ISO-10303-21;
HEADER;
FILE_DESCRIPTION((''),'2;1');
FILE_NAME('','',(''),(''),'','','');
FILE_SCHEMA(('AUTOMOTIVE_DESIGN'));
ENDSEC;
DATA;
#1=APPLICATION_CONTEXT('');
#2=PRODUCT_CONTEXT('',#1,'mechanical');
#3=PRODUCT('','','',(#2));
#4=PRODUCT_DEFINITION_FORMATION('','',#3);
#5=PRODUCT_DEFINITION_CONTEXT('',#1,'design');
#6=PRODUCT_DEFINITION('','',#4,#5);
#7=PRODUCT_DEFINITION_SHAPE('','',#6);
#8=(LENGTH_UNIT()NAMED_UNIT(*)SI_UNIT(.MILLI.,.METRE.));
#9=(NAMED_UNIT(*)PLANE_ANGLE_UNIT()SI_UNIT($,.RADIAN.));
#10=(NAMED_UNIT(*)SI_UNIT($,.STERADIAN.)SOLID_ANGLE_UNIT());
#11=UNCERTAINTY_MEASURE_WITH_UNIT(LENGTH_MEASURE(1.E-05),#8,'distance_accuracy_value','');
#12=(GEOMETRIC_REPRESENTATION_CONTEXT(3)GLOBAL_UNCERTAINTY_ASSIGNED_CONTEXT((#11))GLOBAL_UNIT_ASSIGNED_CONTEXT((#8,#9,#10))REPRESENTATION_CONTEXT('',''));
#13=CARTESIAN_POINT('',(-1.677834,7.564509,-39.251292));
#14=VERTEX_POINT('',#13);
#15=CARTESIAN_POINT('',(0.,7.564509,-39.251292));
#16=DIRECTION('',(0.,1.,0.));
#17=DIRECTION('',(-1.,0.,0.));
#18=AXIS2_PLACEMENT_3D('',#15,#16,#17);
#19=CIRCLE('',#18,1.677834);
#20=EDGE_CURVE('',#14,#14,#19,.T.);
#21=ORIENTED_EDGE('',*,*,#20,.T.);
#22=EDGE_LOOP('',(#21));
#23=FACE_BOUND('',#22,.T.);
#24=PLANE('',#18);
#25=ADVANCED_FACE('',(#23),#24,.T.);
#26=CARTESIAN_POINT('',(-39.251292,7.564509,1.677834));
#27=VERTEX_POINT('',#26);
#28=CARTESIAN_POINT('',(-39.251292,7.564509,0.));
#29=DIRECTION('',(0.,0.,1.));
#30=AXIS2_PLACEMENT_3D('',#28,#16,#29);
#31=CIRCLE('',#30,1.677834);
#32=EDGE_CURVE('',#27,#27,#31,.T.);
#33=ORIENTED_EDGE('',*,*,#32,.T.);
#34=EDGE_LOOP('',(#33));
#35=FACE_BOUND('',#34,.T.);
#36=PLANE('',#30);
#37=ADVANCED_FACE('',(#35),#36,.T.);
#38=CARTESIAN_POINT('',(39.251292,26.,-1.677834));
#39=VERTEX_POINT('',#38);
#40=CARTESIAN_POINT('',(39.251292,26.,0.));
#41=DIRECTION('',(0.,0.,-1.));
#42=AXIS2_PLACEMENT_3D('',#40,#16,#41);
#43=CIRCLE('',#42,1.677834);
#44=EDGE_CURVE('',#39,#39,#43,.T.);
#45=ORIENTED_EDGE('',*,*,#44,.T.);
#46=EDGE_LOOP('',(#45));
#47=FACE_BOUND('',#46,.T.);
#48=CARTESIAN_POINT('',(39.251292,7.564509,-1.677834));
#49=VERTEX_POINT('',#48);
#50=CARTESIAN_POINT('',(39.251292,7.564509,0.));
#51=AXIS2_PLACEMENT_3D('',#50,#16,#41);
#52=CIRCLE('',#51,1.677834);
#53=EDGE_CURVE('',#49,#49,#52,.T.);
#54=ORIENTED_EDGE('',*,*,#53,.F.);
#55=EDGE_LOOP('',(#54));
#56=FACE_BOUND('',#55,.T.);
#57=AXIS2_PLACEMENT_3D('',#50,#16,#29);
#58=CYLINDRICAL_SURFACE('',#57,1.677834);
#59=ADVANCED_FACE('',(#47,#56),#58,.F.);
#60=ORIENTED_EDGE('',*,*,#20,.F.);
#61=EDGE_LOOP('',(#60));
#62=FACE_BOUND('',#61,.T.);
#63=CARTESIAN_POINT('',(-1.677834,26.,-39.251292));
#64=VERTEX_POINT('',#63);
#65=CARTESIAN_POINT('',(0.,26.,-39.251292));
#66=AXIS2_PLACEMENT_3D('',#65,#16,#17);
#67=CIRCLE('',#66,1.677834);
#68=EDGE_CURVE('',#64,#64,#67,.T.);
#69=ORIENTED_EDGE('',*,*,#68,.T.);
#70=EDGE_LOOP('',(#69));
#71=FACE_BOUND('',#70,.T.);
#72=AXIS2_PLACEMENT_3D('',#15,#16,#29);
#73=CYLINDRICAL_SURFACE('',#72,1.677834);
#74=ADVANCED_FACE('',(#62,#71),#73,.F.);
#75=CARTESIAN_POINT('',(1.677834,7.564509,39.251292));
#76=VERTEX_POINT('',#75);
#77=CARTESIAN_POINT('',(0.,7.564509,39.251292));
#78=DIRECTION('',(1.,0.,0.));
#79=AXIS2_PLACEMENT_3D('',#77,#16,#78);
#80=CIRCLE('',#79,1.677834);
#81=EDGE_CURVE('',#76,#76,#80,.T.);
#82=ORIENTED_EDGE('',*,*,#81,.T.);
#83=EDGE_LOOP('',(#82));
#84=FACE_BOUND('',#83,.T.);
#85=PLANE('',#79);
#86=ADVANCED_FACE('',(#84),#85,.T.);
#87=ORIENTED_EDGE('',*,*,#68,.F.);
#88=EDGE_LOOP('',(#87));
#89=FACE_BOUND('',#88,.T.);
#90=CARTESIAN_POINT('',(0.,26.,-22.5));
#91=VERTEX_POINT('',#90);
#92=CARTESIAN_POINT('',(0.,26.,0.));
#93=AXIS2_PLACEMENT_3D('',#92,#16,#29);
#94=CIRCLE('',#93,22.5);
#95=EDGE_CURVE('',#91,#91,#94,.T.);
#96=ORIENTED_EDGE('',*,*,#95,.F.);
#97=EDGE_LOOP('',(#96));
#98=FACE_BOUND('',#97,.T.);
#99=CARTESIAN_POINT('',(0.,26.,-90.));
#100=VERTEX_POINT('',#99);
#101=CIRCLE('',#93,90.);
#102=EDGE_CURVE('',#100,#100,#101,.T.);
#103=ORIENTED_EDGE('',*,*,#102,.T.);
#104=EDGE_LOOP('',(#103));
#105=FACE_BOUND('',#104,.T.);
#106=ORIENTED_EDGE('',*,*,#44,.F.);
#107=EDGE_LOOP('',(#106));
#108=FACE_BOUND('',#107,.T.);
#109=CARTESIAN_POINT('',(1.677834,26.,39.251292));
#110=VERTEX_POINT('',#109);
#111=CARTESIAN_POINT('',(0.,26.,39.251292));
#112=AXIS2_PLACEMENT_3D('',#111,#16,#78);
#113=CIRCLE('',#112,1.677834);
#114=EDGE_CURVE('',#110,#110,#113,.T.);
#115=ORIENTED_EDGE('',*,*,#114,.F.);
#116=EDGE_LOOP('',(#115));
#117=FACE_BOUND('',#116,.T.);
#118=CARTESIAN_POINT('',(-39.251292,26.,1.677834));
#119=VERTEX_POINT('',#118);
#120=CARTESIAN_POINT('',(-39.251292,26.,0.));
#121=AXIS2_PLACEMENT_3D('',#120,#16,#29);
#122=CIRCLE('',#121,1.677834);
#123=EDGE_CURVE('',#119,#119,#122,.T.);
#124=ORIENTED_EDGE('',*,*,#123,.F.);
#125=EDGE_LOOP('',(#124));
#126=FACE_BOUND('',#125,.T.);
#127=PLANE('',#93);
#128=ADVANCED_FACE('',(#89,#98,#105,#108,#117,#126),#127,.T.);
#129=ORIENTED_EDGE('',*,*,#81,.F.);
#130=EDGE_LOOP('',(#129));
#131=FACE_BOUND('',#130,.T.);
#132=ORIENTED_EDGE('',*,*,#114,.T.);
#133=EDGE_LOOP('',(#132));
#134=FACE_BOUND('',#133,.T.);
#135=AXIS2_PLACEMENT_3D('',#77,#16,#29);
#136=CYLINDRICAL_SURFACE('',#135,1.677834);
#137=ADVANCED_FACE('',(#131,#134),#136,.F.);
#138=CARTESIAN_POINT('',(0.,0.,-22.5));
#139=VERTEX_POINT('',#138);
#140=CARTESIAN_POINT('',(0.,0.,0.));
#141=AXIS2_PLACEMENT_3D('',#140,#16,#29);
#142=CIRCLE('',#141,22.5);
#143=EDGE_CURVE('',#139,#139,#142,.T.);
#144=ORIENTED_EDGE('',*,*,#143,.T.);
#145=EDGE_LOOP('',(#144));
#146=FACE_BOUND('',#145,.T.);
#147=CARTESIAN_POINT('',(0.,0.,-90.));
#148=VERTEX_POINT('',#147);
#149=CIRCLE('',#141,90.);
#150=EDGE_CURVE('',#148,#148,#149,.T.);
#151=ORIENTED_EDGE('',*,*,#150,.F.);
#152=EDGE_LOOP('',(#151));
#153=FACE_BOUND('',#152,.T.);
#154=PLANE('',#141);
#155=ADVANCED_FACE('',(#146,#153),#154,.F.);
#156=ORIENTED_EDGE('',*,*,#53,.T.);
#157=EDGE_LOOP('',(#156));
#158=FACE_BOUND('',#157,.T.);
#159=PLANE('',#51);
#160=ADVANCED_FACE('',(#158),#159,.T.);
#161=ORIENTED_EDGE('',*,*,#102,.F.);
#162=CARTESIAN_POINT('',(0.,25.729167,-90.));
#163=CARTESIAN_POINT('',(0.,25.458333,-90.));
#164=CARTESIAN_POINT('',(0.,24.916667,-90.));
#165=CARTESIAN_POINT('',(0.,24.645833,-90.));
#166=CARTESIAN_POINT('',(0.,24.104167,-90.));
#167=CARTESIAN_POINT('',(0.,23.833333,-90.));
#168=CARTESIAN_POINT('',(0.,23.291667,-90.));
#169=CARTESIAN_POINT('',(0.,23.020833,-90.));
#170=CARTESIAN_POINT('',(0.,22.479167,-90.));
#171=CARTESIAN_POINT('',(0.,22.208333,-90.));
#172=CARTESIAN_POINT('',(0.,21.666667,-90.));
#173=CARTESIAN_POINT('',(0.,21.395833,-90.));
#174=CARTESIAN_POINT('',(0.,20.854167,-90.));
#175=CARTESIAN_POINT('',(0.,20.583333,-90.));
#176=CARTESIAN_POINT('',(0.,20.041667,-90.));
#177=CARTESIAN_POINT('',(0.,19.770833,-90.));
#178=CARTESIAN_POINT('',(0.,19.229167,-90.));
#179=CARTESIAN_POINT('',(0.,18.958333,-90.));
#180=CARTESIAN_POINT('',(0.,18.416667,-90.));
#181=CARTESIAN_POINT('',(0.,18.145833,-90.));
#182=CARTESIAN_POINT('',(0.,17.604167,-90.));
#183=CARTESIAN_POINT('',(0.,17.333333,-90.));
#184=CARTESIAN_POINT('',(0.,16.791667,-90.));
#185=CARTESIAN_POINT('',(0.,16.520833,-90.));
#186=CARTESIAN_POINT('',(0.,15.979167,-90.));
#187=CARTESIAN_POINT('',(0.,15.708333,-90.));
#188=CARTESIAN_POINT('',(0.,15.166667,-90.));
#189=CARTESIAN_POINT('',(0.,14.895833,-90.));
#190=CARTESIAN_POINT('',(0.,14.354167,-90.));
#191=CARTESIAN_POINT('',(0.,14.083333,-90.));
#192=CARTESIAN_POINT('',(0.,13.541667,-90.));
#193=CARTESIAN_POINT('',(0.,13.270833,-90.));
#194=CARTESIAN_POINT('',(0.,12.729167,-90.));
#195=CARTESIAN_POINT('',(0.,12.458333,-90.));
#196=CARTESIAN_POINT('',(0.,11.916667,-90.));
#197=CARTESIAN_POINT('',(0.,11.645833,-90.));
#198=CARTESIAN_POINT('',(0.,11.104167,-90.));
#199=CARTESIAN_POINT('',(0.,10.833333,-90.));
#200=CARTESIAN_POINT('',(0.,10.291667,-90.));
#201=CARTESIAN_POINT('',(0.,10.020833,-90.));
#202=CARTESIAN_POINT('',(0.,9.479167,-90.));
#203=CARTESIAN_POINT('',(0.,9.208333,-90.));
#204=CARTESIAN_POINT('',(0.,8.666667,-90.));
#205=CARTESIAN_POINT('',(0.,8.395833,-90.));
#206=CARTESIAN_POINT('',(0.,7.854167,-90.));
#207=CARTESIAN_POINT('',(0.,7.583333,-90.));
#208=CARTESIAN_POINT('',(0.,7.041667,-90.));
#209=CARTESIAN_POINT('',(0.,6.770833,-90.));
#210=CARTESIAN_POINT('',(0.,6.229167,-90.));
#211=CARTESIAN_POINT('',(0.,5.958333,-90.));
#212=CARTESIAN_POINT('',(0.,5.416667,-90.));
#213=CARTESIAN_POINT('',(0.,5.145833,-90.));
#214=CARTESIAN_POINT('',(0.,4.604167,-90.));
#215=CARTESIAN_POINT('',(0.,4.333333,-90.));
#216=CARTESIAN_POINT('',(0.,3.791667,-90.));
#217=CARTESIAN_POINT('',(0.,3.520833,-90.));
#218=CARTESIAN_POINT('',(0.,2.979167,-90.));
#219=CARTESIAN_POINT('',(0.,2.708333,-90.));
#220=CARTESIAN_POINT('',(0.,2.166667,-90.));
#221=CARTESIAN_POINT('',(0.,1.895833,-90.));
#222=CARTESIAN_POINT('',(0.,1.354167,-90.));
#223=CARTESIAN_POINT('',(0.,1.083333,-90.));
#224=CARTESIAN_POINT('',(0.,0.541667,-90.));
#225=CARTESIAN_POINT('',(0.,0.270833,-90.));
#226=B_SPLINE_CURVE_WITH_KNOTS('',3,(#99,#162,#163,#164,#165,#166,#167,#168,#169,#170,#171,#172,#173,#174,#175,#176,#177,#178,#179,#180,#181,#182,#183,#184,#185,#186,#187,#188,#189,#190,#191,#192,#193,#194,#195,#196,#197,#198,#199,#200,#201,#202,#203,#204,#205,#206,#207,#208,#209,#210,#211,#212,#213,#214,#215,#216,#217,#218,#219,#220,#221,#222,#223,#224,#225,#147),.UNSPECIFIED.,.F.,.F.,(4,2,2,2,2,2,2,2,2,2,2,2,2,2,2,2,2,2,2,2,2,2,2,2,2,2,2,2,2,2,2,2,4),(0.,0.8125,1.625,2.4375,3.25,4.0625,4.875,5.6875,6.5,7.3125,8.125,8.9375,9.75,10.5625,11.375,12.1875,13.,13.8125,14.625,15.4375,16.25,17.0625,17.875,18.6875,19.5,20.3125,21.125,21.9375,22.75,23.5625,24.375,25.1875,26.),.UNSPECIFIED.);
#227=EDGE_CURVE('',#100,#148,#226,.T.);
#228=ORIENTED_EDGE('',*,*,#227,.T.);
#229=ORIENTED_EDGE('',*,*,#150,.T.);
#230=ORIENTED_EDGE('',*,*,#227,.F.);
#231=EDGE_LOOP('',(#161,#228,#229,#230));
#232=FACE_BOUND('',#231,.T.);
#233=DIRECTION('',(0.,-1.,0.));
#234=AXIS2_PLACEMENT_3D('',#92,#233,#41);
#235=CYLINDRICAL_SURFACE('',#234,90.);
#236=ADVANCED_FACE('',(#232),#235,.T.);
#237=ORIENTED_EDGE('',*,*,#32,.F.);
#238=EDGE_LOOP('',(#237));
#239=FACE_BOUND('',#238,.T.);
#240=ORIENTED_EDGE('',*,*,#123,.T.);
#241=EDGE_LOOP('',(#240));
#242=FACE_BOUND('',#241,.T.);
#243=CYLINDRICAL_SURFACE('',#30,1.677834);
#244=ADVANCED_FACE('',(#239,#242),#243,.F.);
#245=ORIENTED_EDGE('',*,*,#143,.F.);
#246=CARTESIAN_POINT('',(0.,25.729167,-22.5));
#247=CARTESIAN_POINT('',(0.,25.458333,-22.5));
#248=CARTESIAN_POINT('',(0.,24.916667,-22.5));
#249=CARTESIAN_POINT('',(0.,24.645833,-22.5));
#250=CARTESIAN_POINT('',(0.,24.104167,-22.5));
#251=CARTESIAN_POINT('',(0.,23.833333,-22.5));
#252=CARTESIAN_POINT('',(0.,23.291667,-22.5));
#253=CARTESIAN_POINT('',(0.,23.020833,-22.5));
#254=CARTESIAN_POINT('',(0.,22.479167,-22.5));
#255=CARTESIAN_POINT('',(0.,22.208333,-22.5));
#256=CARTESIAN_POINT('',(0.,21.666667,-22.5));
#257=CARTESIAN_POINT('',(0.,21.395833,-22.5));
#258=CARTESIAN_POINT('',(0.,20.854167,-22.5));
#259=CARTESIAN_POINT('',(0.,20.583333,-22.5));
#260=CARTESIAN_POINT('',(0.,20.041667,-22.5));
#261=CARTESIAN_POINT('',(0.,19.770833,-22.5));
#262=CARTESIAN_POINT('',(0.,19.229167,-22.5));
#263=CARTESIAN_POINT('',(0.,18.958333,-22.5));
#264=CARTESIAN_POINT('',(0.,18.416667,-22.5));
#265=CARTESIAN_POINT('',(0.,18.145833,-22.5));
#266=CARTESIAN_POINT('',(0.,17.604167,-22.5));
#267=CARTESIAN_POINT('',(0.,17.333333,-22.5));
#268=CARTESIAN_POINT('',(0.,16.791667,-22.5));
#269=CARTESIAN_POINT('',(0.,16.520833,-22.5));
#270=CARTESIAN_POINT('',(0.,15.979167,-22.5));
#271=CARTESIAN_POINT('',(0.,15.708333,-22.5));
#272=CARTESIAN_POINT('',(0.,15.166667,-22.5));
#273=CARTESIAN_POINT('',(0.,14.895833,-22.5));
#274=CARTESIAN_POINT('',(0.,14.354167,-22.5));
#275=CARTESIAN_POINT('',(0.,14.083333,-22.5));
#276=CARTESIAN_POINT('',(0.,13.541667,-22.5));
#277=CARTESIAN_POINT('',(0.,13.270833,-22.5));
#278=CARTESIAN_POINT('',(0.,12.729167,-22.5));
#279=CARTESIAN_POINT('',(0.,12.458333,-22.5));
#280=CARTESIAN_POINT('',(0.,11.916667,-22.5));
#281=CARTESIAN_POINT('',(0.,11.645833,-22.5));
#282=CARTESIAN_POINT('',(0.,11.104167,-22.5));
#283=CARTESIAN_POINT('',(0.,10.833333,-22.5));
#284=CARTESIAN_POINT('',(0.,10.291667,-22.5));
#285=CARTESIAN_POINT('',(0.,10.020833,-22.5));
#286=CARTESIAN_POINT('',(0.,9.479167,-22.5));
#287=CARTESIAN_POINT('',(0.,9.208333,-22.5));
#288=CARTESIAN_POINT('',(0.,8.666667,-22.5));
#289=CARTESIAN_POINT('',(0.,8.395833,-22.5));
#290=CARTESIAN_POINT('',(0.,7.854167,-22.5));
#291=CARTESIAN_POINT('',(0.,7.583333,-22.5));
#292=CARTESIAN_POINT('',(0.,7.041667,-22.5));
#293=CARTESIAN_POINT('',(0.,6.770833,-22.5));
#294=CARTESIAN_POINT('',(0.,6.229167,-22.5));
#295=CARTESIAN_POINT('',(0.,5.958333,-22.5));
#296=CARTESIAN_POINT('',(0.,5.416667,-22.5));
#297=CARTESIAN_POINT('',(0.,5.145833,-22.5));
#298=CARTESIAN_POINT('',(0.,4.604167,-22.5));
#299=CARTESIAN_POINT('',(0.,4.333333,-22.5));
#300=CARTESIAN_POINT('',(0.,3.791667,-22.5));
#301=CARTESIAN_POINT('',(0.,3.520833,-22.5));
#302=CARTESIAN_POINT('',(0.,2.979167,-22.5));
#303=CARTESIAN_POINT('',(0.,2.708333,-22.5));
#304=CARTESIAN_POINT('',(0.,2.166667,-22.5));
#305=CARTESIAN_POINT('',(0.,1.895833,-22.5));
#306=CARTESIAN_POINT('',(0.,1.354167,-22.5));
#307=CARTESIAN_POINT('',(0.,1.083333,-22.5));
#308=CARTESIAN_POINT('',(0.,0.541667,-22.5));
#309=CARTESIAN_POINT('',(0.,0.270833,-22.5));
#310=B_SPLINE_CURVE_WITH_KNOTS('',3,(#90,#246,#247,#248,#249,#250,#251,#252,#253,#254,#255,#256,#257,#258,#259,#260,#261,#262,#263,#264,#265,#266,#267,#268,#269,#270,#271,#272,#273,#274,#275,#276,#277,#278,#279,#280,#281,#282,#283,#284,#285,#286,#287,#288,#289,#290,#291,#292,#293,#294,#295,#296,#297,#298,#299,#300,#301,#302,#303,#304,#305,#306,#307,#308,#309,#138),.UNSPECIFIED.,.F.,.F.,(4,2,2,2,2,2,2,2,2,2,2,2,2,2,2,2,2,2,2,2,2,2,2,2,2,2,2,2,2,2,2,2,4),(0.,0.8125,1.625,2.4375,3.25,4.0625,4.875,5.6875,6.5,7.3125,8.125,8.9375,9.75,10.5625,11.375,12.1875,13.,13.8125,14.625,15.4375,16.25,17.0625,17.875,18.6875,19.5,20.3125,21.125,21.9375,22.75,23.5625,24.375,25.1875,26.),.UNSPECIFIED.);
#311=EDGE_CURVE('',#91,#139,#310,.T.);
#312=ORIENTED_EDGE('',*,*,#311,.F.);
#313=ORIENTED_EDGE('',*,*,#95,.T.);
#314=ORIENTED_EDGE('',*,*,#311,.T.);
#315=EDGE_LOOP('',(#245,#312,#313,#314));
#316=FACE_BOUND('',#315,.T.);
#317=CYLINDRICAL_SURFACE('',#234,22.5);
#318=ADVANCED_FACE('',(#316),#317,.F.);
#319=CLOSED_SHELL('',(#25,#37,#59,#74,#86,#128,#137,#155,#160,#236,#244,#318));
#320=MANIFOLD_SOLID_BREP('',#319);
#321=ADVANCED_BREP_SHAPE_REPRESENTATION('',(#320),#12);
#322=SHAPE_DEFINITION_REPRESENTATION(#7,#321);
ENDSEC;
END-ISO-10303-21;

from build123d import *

# Parameters (mm, degrees)
SKETCH1_R           = 90
BOSS_EXTRUDE1_DEPTH = 26
SKETCH2_R           = 22.5
CUT_EXTRUDE1_DEPTH  = 130.907659512
SKETCH3_R           = 1.67783378
CUT_EXTRUDE2_DEPTH  = 18.435490804
CIRPATTERN1_COUNT   = 4


with BuildPart() as part:
    # Sketch1 → Boss-Extrude1 (new body)
    with BuildSketch(Plane(origin=(0, 0, 0), x_dir=(1, 0, 0), z_dir=(0, 1, 0))):
        Circle(SKETCH1_R)
    extrude(amount=BOSS_EXTRUDE1_DEPTH)

    # Sketch2 → Cut-Extrude1 (cut, through all)
    with BuildSketch(Plane(origin=(0, 0, 0), x_dir=(1, 0, 0), z_dir=(0, 1, 0))):
        Circle(SKETCH2_R)
    extrude(amount=CUT_EXTRUDE1_DEPTH, mode=Mode.SUBTRACT)

    # Sketch3 → Cut-Extrude2 (cut)
    with BuildSketch(Plane(origin=(0, 26, 0), x_dir=(1, 0, 0), z_dir=(0, 1, 0))):
        with Locations((-39.251291853, 0)):
            Circle(SKETCH3_R)
    cut_extrude2 = extrude(amount=-CUT_EXTRUDE2_DEPTH, mode=Mode.SUBTRACT)

    # CirPattern1: Cut-Extrude2 ×4 about axis
    cirpattern1_axis = Axis((0, 0, 0), (0, 1, 0))
    for i in range(1, CIRPATTERN1_COUNT):
        add(cut_extrude2.rotate(cirpattern1_axis, i * 360 / CIRPATTERN1_COUNT), mode=Mode.SUBTRACT)


solid = part.part
